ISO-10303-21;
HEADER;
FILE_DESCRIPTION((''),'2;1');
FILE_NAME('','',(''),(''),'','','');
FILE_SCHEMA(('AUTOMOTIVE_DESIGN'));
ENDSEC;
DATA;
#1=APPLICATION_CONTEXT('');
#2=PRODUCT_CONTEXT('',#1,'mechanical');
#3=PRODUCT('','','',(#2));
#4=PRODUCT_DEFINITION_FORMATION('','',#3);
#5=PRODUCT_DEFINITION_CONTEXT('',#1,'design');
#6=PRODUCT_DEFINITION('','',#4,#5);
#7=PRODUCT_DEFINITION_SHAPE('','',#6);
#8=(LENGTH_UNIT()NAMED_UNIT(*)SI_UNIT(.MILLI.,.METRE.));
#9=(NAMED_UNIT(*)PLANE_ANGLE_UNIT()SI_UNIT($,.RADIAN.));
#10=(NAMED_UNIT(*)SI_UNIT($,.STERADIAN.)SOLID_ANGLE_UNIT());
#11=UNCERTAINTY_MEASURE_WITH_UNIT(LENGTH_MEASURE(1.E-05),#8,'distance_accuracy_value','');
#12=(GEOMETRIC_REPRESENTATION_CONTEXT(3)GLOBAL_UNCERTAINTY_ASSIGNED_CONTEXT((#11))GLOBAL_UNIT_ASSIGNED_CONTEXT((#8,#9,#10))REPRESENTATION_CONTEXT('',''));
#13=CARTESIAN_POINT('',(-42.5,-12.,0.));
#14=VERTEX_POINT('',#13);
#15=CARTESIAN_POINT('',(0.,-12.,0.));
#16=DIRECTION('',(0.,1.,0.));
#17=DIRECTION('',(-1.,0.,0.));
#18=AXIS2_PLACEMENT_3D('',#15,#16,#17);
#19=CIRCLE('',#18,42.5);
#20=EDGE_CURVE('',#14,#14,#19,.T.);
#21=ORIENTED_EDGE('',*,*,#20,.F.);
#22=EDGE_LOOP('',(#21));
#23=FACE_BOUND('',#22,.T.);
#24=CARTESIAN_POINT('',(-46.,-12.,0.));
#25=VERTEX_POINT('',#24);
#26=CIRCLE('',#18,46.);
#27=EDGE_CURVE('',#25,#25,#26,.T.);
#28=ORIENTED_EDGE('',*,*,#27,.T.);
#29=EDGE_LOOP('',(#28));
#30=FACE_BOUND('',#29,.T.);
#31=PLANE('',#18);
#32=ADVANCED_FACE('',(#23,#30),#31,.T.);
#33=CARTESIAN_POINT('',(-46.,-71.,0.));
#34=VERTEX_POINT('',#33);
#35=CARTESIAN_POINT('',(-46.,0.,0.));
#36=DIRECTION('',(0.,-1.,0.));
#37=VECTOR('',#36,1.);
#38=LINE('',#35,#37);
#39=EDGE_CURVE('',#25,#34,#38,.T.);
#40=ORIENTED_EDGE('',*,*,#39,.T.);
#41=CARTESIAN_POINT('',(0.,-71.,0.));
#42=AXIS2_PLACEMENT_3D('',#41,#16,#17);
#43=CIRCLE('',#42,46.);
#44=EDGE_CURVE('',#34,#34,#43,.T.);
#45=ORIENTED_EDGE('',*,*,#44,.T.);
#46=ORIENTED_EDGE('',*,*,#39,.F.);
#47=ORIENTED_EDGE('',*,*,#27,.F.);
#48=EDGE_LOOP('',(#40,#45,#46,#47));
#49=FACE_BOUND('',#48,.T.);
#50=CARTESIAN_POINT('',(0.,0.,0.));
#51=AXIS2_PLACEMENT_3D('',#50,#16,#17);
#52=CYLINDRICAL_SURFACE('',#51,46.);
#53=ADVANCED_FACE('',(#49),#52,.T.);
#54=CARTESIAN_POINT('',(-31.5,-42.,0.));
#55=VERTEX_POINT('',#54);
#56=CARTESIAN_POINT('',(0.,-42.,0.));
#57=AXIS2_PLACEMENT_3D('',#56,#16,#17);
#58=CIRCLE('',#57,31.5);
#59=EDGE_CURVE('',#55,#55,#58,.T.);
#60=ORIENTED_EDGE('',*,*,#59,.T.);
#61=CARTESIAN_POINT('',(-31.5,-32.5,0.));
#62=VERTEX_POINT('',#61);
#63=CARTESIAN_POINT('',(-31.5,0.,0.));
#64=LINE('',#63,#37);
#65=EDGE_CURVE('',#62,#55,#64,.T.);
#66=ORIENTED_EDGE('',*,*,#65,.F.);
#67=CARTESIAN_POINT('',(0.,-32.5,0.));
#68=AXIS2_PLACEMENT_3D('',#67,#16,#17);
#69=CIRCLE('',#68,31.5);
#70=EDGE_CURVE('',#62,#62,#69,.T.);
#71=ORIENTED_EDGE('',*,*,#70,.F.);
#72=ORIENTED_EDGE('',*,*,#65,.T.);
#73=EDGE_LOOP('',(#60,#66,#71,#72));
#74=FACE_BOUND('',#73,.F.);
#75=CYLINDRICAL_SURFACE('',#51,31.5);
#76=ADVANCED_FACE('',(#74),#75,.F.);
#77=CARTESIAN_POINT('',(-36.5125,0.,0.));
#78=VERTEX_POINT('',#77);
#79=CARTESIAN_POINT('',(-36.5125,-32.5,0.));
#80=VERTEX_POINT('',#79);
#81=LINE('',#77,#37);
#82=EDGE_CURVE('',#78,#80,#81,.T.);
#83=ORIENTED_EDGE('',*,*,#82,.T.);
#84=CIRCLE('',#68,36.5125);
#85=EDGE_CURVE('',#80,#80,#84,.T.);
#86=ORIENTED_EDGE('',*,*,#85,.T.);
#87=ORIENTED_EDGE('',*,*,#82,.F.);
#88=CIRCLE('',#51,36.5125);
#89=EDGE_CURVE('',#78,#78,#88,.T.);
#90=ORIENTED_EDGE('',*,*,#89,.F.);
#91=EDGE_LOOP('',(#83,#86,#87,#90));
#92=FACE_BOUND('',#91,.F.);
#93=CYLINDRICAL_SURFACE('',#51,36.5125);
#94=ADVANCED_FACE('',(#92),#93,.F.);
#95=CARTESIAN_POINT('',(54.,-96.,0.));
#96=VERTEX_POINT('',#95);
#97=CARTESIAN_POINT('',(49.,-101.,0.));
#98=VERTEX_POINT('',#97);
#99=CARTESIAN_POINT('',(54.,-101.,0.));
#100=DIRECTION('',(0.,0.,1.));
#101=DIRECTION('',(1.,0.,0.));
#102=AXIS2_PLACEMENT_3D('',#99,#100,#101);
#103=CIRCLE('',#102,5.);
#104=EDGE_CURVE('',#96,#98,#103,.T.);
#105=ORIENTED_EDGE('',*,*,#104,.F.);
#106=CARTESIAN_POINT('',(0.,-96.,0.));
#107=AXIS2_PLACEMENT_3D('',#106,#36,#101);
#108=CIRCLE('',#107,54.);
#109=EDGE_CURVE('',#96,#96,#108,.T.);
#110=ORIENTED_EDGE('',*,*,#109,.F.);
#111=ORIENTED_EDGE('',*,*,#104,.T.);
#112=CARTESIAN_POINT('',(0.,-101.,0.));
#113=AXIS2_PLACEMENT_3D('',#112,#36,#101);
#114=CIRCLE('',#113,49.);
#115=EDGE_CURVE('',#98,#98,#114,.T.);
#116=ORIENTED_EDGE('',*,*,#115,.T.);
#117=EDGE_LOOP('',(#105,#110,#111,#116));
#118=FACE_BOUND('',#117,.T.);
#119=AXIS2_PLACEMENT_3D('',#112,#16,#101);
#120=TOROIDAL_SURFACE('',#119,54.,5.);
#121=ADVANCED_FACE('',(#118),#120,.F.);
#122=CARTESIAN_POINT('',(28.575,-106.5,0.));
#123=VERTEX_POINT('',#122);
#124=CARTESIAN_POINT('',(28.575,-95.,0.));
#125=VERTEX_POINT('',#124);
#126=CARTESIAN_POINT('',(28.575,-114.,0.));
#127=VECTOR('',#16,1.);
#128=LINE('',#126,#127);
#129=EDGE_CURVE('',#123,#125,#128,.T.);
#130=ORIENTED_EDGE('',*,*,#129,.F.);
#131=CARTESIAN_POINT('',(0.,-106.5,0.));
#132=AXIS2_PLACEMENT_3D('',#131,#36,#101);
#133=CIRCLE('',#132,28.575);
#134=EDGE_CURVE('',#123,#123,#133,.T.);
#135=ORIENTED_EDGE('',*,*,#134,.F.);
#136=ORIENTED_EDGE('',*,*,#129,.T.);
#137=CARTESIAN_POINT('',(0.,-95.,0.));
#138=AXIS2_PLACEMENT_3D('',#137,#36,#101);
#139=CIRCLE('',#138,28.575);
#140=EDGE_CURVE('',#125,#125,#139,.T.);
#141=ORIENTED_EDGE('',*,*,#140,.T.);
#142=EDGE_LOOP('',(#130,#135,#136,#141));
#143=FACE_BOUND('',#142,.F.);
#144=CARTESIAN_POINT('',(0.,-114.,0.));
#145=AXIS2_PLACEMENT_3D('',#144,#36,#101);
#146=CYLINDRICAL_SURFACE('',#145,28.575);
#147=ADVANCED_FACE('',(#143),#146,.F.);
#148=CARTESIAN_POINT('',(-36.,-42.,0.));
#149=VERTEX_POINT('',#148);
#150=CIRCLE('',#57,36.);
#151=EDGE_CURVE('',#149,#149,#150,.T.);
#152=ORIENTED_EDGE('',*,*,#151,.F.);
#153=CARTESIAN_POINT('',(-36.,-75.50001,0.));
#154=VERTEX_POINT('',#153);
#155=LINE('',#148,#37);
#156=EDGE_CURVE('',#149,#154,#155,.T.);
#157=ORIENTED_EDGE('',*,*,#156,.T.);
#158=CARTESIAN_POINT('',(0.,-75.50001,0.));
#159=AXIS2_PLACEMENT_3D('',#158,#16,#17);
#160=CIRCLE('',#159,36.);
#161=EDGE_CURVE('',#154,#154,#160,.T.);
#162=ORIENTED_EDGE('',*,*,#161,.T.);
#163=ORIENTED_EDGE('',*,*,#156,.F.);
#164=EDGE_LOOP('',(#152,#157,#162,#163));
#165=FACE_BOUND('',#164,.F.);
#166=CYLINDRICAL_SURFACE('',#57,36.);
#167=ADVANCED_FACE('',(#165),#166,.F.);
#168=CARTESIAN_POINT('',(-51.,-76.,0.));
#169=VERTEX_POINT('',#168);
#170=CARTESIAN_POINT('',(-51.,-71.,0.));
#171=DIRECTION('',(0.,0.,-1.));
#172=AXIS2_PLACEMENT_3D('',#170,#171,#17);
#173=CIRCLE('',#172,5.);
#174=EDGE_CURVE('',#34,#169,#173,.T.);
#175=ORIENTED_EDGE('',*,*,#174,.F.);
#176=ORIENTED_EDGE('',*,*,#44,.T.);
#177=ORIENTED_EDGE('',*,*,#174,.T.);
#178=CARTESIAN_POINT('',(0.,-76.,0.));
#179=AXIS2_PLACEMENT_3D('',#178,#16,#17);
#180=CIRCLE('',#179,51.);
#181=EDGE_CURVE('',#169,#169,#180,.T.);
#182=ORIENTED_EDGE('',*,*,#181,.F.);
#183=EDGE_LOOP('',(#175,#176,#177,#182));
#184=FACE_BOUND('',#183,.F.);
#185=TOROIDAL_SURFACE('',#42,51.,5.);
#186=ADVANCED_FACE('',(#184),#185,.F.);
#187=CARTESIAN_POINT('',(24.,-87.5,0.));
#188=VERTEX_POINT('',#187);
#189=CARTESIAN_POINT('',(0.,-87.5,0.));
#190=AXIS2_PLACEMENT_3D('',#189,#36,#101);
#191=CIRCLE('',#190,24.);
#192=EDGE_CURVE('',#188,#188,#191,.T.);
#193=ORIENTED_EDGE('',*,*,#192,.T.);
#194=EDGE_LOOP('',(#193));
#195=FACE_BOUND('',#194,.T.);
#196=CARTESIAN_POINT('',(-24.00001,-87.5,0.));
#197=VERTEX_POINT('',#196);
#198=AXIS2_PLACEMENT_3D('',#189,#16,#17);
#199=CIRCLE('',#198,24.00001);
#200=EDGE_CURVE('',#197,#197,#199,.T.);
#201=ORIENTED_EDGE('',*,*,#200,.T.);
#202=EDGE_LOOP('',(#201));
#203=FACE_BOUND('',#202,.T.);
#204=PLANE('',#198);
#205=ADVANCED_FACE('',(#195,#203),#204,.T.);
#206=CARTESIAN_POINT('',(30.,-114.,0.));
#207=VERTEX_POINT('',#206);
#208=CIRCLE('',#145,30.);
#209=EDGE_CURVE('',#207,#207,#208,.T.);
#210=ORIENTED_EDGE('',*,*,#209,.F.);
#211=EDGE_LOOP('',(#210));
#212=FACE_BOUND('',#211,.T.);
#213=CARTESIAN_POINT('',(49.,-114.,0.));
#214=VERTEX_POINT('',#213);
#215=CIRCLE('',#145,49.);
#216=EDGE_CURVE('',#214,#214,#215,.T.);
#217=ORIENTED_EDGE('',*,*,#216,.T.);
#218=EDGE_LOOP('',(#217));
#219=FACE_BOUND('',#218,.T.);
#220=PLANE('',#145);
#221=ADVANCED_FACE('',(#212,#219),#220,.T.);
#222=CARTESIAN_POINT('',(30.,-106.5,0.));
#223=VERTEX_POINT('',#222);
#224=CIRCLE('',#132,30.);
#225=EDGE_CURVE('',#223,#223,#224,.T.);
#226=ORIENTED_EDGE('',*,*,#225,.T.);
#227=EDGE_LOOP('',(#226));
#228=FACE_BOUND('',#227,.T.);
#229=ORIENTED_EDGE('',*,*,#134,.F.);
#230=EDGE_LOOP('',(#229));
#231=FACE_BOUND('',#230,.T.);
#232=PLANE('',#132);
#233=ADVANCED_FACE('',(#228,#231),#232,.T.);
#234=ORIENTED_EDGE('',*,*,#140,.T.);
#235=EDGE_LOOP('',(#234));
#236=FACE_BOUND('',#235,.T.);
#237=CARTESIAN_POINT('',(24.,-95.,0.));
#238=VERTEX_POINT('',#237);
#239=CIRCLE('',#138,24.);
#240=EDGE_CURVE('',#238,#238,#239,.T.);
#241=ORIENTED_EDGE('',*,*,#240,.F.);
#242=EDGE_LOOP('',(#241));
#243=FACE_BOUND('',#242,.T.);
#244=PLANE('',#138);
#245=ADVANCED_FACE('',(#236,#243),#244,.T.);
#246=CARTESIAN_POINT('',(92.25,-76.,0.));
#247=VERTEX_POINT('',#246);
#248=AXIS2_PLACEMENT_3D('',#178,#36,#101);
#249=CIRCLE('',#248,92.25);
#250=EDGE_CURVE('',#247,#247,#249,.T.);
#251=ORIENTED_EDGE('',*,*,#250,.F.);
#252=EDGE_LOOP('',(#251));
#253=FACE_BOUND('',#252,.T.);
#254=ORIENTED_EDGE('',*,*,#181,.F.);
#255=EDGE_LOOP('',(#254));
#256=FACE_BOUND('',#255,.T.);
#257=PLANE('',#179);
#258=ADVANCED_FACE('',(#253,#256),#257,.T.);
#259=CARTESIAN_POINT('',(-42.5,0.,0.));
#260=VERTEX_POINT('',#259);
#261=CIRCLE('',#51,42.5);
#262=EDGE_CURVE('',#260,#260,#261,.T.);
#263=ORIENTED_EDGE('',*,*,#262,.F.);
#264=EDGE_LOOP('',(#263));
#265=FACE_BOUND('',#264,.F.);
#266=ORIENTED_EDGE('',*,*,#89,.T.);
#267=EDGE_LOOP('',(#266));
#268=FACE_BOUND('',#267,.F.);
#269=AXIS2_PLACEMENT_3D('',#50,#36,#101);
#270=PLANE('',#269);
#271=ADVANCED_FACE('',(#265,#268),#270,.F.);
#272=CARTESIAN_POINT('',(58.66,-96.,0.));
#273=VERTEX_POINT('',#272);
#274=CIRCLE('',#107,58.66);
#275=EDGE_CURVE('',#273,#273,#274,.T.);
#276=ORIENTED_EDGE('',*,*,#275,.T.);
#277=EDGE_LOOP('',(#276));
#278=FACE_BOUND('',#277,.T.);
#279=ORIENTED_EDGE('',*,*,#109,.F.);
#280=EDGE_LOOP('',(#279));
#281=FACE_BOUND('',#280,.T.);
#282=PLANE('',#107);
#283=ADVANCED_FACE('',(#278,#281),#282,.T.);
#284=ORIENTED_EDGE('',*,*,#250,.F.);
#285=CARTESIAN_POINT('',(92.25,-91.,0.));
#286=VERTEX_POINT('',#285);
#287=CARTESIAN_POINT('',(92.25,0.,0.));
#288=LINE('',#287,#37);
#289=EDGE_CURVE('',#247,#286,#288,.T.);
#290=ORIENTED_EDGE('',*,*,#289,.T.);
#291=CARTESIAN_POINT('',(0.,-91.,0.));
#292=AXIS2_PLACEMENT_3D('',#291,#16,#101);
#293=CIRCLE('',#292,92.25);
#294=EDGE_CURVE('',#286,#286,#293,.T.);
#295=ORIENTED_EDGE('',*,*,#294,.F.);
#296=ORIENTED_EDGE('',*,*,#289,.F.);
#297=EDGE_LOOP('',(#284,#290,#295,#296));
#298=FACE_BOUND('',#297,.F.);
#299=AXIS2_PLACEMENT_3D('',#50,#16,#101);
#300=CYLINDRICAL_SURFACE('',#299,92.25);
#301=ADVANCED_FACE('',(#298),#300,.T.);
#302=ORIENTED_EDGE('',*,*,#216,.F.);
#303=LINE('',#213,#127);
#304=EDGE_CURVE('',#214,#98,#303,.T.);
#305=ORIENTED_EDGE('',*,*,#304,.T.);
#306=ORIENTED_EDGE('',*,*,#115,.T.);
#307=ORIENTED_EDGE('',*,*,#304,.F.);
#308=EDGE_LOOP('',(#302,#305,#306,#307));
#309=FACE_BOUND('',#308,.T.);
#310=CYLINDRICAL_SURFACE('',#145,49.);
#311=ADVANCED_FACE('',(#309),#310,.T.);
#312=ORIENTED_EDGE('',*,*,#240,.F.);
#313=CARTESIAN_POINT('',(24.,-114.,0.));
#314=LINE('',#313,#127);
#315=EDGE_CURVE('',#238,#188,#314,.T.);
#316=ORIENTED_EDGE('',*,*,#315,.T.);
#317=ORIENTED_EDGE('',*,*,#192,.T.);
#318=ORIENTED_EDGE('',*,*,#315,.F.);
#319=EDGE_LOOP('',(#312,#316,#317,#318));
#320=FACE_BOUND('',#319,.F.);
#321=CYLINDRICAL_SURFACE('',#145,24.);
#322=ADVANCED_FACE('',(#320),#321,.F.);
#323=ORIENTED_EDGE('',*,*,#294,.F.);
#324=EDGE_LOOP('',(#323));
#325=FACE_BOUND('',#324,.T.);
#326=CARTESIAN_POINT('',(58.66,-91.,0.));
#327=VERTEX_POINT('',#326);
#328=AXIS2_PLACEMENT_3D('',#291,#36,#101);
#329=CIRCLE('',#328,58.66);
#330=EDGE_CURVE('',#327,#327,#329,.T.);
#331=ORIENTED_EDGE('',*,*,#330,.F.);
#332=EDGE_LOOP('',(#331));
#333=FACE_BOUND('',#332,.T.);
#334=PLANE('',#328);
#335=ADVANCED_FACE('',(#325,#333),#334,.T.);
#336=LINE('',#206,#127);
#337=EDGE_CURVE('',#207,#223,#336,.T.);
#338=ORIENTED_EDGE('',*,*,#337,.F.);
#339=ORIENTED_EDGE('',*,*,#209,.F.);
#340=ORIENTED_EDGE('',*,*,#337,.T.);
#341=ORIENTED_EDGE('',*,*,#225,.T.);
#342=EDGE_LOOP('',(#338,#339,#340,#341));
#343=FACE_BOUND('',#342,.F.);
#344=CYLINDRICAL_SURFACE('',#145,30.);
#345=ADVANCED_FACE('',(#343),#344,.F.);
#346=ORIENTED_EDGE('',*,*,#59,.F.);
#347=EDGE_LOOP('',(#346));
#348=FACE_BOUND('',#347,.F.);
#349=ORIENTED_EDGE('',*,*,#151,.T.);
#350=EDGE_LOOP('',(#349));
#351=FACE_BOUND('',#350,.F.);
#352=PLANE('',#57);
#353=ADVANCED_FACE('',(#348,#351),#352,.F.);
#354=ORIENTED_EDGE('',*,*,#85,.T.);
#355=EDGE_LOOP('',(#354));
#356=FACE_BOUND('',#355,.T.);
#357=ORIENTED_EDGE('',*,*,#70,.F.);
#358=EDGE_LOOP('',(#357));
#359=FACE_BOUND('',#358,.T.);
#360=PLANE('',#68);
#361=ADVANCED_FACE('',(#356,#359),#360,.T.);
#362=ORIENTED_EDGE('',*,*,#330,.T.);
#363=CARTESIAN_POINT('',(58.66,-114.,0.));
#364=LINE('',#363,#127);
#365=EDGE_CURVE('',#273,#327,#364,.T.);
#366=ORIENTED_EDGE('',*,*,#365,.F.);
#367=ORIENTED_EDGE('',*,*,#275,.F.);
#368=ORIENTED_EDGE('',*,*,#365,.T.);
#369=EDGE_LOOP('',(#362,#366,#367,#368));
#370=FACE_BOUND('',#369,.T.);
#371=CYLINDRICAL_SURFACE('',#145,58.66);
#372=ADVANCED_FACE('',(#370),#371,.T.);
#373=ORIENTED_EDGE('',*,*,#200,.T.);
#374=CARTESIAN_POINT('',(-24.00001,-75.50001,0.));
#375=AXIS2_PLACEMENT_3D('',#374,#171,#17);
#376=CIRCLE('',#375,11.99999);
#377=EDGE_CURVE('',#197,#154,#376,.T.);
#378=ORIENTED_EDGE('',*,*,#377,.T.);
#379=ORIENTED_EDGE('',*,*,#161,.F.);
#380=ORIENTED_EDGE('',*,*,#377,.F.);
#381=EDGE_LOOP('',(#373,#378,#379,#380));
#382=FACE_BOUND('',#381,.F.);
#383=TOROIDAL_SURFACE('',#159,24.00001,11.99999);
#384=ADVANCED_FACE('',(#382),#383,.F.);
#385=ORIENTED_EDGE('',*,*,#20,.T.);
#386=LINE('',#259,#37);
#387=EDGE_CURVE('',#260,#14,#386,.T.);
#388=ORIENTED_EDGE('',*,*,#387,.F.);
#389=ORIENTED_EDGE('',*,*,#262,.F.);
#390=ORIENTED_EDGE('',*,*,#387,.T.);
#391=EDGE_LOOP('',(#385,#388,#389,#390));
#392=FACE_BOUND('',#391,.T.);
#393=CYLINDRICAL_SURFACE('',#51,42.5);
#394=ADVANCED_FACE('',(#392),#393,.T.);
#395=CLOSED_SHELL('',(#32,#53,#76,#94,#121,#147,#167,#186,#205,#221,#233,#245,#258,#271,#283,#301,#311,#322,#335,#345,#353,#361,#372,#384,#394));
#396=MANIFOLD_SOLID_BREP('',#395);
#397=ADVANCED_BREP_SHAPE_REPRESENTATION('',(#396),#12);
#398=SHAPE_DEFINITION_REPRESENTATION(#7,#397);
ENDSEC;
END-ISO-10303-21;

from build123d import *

# Parameters (mm, degrees)
F0_R      = 92.25
F1_DEPTH  = 114
F2_R      = 92.25
F2_R_2    = 49
F3_DEPTH  = 18
F4_R      = 5
F5_R      = 24
F6_DEPTH  = 26.5
F7_R      = 28.575
F8_DEPTH  = 19
F9_R      = 30
F10_DEPTH = 7.5
F11_R     = 92.25
F11_R_2   = 46
F12_DEPTH = 76
F13_R     = 46
F13_R_2   = 42.5
F14_DEPTH = 12
F15_R     = 31.5
F16_DEPTH = 42
F17_R     = 36.5125
F18_DEPTH = 32.5
F19_R     = 36
F20_DEPTH = 45.5
F21_R     = 11.99999
F22_R     = 5
F23_R     = 92.75
F23_R_2   = 58.66
F24_DEPTH = 23


# Not quite as in the source:
# - a fillet or chamfer is up to 0.001 mm smaller than in the source, because OpenCascade refuses the exact size


with BuildPart() as f1:
    # F0 (on Front) → F1 (new body)
    with BuildSketch(Plane.XZ):
        Circle(F0_R)
    extrude(amount=F1_DEPTH)

    # F2 (on face) → F3 (cut)
    with BuildSketch(Plane.XZ.offset(114)):
        Circle(F2_R)
        Circle(F2_R_2, mode=Mode.SUBTRACT)
    extrude(amount=-F3_DEPTH, mode=Mode.SUBTRACT)

    # F4
    f4_edges = [f1.edges().sort_by_distance(p)[0] for p in [
        (-49, -96, 0),
    ]]
    fillet(f4_edges, radius=F4_R)

    # F5 (on face) → F6 (cut)
    with BuildSketch(Plane.XZ.offset(114)):
        Circle(F5_R)
    extrude(amount=-F6_DEPTH, mode=Mode.SUBTRACT)

    # F7 (on face) → F8 (cut)
    with BuildSketch(Plane.XZ.offset(114)):
        Circle(F7_R)
    extrude(amount=-F8_DEPTH, mode=Mode.SUBTRACT)

    # F9 (on face) → F10 (cut)
    with BuildSketch(Plane.XZ.offset(114)):
        Circle(F9_R)
    extrude(amount=-F10_DEPTH, mode=Mode.SUBTRACT)

    # F11 (on face) → F12 (cut)
    with BuildSketch(Plane(origin=(0, 0, 0), x_dir=(-1, 0, 0), z_dir=(0, 1, 0))):
        Circle(F11_R)
        Circle(F11_R_2, mode=Mode.SUBTRACT)
    extrude(amount=-F12_DEPTH, mode=Mode.SUBTRACT)

    # F13 (on face) → F14 (cut)
    with BuildSketch(Plane(origin=(0, 0, 0), x_dir=(-1, 0, 0), z_dir=(0, 1, 0))):
        Circle(F13_R)
        Circle(F13_R_2, mode=Mode.SUBTRACT)
    extrude(amount=-F14_DEPTH, mode=Mode.SUBTRACT)

    # F15 (on face) → F16 (cut)
    with BuildSketch(Plane(origin=(0, 0, 0), x_dir=(-1, 0, 0), z_dir=(0, 1, 0))):
        Circle(F15_R)
    extrude(amount=-F16_DEPTH, mode=Mode.SUBTRACT)

    # F17 (on face) → F18 (cut)
    with BuildSketch(Plane(origin=(0, 0, 0), x_dir=(-1, 0, 0), z_dir=(0, 1, 0))):
        Circle(F17_R)
    extrude(amount=-F18_DEPTH, mode=Mode.SUBTRACT)

    # F19 (on face) → F20 (cut)
    with BuildSketch(Plane(origin=(0, -42, 0), x_dir=(-1, 0, 0), z_dir=(0, 1, 0))):
        Circle(F19_R)
    extrude(amount=-F20_DEPTH, mode=Mode.SUBTRACT)

    # F21 (radius 12 in the source; OpenCascade refuses exactly that, so slightly less here)
    f21_edges = [f1.edges().sort_by_distance(p)[0] for p in [
        (36, -87.5, 0),
    ]]
    fillet(f21_edges, radius=F21_R)

    # F22
    f22_edges = [f1.edges().sort_by_distance(p)[0] for p in [
        (46, -76, 0),
    ]]
    fillet(f22_edges, radius=F22_R)

    # F23 (on face) → F24 (cut)
    with BuildSketch(Plane.XZ.offset(114)):
        Circle(F23_R)
        Circle(F23_R_2, mode=Mode.SUBTRACT)
    extrude(amount=-F24_DEPTH, mode=Mode.SUBTRACT)


solid = f1.part
